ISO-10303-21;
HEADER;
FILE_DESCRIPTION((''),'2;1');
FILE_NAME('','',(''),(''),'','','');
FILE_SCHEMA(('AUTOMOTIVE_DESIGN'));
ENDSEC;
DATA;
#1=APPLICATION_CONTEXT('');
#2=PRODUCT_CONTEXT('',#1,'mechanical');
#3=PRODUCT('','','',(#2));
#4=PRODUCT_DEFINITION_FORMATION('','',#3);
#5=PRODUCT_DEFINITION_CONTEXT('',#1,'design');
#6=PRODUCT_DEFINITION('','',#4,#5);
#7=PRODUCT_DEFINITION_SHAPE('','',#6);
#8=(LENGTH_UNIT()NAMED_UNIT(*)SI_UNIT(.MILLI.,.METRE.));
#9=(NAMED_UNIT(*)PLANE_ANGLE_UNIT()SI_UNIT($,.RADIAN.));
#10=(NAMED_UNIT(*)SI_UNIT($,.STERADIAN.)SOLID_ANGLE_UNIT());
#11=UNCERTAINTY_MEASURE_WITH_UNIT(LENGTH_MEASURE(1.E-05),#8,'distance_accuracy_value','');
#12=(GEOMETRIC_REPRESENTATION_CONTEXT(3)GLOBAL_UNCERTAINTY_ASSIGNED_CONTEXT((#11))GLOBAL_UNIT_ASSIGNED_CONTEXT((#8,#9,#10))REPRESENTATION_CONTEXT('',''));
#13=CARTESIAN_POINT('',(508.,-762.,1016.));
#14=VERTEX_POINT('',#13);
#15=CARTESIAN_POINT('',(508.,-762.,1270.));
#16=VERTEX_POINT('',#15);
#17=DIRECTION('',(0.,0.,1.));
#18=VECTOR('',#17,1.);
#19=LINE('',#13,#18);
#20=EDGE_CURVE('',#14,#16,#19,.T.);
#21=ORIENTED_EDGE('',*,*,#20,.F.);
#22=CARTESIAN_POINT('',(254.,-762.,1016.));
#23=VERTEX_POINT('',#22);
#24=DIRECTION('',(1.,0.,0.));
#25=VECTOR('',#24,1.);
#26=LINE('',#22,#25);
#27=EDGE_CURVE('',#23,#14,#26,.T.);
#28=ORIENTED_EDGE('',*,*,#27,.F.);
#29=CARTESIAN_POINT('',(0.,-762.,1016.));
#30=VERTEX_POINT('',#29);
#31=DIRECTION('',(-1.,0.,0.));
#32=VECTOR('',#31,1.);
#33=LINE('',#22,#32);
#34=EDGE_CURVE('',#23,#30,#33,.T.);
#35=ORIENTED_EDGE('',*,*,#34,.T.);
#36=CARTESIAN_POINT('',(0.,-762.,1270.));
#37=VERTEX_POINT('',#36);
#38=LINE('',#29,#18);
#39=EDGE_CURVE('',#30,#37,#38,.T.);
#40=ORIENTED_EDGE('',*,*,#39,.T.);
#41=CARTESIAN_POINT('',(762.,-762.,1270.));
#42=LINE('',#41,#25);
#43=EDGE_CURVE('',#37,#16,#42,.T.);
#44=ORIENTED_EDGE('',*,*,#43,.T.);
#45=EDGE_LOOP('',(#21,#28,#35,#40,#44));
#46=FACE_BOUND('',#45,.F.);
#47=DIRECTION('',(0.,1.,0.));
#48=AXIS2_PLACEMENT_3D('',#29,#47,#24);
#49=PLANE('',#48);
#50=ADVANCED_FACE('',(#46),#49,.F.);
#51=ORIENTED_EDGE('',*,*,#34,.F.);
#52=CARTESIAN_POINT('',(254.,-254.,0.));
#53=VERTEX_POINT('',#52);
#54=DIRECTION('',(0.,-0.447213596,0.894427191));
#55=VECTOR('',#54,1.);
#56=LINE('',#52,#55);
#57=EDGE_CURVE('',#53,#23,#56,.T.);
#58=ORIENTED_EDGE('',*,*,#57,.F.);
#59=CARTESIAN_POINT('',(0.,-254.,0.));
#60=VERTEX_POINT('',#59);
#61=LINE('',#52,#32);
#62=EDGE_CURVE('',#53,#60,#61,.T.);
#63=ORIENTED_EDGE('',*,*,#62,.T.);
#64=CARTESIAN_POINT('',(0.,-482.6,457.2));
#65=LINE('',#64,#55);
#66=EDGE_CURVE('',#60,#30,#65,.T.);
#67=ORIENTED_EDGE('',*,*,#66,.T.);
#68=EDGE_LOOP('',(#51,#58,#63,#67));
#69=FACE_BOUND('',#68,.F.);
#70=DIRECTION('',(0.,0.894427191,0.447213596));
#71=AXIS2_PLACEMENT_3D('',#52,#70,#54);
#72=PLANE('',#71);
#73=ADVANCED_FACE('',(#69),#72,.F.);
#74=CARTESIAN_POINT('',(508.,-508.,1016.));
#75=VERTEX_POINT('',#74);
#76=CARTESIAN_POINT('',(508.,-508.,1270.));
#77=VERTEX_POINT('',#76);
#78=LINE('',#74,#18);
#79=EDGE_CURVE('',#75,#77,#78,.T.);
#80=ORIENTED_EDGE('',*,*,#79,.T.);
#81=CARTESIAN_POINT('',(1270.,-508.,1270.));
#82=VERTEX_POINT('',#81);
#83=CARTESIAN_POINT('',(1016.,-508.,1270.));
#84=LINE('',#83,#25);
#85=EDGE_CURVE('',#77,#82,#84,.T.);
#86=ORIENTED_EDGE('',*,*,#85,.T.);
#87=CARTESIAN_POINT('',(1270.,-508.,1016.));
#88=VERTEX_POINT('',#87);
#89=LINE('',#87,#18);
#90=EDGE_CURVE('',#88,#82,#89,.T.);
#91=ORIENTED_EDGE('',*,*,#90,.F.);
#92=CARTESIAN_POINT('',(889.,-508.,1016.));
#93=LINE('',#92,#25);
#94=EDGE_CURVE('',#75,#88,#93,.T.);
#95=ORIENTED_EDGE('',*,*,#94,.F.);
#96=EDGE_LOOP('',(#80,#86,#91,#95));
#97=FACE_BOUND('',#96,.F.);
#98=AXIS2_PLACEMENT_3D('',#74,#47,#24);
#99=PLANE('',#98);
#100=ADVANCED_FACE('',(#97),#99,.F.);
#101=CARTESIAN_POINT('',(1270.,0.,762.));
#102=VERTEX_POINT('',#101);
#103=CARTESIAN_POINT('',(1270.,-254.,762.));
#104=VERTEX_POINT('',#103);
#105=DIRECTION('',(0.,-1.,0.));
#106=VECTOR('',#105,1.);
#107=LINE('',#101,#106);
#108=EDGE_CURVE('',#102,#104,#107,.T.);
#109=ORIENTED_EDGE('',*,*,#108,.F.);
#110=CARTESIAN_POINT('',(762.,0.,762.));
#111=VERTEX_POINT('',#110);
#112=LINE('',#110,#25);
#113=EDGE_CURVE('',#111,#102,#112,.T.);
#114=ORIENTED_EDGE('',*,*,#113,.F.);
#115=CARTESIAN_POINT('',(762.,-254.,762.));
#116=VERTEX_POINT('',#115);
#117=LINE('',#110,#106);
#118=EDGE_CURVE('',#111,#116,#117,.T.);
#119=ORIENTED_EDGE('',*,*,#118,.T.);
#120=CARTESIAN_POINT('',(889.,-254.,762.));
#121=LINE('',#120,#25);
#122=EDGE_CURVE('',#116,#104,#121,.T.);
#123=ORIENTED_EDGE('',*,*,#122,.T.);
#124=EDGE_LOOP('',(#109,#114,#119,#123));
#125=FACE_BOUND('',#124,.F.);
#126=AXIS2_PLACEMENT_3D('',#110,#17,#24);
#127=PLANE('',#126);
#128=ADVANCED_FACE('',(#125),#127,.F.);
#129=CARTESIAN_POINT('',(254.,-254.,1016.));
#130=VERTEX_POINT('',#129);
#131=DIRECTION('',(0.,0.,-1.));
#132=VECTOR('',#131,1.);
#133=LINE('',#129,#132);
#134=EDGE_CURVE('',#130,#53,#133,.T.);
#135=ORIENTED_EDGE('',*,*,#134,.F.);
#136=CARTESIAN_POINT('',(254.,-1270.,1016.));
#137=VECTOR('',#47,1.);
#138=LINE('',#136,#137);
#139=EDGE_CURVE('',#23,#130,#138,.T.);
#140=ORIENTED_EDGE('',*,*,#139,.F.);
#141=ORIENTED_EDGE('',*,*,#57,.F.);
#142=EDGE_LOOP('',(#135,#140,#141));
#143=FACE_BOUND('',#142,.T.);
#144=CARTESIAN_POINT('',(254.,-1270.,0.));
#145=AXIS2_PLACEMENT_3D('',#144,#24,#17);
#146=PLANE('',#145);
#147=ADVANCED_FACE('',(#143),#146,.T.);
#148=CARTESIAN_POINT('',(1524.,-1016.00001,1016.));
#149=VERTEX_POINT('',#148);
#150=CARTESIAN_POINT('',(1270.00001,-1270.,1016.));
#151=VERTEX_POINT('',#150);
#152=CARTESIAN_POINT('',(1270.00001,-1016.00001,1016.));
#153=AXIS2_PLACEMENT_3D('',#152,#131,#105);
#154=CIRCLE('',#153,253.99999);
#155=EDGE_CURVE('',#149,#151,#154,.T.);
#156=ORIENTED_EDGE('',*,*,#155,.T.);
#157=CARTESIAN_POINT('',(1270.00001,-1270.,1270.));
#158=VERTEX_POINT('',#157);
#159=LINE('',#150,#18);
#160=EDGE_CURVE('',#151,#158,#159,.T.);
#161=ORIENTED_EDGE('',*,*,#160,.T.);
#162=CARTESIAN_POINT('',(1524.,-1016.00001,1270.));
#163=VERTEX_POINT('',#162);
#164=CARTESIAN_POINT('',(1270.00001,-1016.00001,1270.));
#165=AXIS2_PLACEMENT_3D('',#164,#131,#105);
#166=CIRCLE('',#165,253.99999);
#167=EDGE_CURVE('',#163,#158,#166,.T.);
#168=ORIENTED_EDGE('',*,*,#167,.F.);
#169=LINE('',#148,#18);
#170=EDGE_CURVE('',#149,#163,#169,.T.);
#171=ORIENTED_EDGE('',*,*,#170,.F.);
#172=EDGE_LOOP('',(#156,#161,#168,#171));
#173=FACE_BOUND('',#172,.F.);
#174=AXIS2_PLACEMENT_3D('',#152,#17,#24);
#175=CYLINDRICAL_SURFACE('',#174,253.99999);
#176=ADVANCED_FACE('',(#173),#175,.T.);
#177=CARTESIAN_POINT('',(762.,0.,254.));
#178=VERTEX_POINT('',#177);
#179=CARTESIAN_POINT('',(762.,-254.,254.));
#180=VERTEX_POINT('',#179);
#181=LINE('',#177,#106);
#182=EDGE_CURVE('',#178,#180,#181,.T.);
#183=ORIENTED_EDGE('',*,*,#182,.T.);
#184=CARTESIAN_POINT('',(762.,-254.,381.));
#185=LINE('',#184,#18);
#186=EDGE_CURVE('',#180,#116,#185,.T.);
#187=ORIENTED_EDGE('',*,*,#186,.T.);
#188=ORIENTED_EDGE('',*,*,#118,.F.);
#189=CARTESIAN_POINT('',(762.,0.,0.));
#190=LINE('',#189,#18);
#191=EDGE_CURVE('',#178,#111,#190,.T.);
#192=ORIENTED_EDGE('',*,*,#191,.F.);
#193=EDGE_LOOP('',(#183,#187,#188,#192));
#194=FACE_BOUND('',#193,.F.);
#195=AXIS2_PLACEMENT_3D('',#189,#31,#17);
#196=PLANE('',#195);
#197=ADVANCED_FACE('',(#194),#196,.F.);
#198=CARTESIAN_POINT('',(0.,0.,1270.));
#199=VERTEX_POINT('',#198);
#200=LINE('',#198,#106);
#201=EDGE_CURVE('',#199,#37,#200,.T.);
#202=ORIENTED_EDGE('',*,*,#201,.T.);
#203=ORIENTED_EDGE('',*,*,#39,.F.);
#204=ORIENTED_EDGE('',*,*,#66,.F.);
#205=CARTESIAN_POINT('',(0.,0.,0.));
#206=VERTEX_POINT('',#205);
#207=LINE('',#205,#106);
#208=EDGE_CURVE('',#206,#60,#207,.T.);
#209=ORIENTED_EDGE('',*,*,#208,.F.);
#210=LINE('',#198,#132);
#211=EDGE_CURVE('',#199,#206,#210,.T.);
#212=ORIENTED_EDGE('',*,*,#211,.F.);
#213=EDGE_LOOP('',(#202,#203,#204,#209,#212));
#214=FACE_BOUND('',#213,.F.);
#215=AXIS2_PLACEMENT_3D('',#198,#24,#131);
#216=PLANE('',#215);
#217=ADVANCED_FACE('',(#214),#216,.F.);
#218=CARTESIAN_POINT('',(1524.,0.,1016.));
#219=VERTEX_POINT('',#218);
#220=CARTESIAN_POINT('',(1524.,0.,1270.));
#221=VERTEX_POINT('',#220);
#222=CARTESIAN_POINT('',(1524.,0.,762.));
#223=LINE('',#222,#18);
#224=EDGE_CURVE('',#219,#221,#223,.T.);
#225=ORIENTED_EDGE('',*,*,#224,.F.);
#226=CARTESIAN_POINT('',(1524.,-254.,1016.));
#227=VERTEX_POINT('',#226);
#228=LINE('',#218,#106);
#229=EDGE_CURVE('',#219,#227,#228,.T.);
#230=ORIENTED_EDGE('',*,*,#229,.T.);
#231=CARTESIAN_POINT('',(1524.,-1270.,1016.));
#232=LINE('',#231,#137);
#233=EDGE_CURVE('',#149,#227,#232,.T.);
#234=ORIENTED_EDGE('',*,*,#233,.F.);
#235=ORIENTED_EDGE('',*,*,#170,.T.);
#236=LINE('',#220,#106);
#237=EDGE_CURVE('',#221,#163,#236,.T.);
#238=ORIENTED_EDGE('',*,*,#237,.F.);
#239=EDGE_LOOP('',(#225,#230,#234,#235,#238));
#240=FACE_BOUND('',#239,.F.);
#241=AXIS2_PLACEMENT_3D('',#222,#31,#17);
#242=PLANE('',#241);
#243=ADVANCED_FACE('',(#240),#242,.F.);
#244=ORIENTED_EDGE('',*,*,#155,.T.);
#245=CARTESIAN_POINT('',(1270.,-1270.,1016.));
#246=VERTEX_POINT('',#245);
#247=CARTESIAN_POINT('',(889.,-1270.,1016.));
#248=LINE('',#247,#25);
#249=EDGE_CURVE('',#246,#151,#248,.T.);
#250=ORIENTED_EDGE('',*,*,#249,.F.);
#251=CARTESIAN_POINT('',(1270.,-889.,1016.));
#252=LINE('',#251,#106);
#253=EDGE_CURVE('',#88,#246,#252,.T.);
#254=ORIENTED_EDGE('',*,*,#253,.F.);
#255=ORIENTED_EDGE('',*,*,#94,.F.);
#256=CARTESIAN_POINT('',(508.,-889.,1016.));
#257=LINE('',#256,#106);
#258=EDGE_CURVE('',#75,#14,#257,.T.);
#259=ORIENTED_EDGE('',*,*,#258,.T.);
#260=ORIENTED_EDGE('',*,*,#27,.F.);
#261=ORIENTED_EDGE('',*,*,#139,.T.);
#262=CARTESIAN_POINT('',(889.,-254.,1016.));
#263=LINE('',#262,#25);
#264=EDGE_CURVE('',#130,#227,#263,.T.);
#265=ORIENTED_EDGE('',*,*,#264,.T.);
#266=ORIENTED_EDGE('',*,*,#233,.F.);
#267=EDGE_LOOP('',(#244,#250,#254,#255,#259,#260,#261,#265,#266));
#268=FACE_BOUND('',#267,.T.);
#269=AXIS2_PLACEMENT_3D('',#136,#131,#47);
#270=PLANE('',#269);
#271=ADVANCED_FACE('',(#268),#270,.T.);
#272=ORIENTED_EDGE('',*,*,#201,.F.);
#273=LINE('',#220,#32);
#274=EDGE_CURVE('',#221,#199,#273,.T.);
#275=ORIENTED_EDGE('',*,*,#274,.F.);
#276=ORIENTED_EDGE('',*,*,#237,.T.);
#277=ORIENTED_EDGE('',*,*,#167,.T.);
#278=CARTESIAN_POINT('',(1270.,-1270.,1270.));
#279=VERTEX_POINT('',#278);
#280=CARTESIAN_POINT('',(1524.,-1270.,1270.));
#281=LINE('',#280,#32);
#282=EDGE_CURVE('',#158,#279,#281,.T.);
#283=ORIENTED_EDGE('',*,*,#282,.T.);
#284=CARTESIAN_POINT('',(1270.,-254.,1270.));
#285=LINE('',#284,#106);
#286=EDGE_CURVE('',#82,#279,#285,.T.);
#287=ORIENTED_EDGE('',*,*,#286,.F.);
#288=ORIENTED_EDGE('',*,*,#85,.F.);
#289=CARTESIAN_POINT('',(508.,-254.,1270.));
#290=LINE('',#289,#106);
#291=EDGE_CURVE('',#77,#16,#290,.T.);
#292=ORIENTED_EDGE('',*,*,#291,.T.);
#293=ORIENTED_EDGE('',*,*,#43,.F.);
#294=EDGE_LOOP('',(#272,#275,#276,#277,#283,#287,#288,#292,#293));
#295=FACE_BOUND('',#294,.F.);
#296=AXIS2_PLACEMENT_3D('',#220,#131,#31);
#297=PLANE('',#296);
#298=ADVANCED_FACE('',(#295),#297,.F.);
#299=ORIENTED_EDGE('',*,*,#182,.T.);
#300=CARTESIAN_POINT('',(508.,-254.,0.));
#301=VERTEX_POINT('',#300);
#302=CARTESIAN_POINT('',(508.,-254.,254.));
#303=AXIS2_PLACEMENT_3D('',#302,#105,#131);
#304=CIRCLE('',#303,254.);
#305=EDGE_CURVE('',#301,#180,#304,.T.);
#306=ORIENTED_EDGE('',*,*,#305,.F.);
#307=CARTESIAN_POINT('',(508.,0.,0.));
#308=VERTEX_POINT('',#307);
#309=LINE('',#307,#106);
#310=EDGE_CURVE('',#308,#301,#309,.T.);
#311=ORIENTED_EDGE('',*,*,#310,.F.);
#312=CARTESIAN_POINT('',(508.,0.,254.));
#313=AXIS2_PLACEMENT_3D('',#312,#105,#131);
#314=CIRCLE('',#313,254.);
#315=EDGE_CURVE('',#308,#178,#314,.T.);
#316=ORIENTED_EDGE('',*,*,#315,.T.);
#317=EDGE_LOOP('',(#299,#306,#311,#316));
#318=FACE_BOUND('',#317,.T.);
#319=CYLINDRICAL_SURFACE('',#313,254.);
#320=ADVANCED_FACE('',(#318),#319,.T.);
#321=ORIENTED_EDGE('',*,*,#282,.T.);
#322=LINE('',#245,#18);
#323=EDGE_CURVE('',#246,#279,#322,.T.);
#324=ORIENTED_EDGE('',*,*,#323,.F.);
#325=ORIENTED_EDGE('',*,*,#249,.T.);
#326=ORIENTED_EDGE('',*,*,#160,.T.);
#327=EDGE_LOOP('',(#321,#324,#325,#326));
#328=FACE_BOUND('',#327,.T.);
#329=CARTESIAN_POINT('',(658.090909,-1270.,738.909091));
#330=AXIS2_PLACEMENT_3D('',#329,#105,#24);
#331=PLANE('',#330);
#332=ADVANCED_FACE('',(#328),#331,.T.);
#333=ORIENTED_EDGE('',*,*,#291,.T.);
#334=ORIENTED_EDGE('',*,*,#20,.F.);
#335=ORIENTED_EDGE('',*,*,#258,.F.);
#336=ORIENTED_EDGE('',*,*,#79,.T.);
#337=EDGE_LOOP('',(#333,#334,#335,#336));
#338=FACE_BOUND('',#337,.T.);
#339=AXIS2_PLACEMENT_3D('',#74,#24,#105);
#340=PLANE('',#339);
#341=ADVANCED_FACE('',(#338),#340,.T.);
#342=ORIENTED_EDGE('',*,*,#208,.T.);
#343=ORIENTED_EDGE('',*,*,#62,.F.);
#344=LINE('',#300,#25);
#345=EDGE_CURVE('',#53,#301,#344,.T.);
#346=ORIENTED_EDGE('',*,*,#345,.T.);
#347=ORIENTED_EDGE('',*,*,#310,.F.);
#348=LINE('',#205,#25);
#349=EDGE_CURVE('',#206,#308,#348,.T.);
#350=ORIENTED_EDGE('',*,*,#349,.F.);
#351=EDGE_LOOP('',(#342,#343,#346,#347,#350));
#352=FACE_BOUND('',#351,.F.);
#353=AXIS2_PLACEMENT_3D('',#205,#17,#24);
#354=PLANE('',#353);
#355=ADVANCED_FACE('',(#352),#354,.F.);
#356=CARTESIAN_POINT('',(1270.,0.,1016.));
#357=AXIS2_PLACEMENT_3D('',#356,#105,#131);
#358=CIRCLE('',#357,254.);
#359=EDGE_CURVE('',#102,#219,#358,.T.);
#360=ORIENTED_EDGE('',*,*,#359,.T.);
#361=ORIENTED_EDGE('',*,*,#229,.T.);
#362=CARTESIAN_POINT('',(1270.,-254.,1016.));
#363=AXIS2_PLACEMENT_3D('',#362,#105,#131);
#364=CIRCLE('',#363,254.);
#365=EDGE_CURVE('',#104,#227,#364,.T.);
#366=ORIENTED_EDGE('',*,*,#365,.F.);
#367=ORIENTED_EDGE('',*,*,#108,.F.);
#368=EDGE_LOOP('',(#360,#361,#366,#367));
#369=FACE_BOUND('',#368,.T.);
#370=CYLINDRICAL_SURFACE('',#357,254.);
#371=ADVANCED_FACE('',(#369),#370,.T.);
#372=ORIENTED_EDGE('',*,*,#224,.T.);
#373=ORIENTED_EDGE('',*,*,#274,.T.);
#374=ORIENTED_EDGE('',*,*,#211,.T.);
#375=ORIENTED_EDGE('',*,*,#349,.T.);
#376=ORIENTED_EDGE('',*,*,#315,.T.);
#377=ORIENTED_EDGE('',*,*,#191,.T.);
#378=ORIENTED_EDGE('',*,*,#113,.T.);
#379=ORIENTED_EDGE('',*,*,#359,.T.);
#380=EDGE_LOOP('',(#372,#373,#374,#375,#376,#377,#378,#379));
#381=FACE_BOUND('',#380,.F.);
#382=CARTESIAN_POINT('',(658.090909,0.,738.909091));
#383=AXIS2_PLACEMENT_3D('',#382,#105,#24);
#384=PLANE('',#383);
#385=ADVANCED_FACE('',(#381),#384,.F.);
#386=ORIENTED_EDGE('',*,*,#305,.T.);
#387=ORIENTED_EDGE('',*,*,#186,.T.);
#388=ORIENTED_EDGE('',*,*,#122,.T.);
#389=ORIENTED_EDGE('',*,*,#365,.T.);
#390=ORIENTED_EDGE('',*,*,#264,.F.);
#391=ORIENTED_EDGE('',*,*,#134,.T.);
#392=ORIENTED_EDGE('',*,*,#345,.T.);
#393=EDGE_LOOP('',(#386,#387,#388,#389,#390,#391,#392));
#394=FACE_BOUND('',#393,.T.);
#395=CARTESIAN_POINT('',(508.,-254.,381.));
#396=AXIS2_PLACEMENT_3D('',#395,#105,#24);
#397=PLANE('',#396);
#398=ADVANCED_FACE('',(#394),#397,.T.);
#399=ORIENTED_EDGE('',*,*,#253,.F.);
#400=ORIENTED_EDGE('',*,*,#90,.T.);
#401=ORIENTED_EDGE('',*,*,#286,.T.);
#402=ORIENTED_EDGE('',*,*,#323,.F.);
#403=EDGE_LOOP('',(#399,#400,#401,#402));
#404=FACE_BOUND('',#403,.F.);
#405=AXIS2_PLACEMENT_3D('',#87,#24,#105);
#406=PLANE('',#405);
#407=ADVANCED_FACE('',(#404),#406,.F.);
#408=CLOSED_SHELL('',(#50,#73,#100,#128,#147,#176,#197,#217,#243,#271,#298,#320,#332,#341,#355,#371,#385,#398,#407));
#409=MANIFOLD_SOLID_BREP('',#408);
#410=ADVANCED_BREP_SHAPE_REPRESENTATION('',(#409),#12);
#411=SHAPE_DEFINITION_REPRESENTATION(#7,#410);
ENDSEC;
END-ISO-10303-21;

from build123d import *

# Parameters (mm, degrees)
F1_DEPTH  = 1270
F2_W      = 508
F2_H      = 762
F3_DEPTH  = 1016
F4_W      = 1270
F4_H      = 254
F5_DEPTH  = 1016
F6_W      = 762
F6_H      = 762
F7_DEPTH  = 254.001
F8_W      = 508
F8_H      = 1016
F9_DEPTH  = 254.001
F11_DEPTH = 254.001
F12_W     = 508
F12_H     = 508
F13_DEPTH = 254.001
F14_R     = 254
F15_R     = 253.99999


# Not quite as in the source:
# - a fillet or chamfer is up to 0.001 mm smaller than in the source, because OpenCascade refuses the exact size


with BuildPart() as f1:
    # F0 (on Front) → F1 (new body)
    with BuildSketch(Plane.XZ):
        Polygon((0, 1270), (0, 0), (762, 0), (762, 762), (1524, 762), (1524, 1270), align=None)
    extrude(amount=F1_DEPTH)

    # F2 (on face) → F3 (cut)
    with BuildSketch(Plane.XZ.offset(1270)):
        with Locations((508, 381)):
            Rectangle(F2_W, F2_H)
    extrude(amount=-F3_DEPTH, mode=Mode.SUBTRACT)

    # F4 (on face) → F5 (cut)
    with BuildSketch(Plane.XZ.offset(1270)):
        with Locations((889, 889)):
            Rectangle(F4_W, F4_H)
    extrude(amount=-F5_DEPTH, mode=Mode.SUBTRACT)

    # F6 (on face) → F7 (cut, through all)
    with BuildSketch(Plane(origin=(0, 0, 1016), x_dir=(1, 0, 0), z_dir=(0, 0, -1))):
        with Locations((889, 889)):
            Rectangle(F6_W, F6_H)
    extrude(amount=-F7_DEPTH, mode=Mode.SUBTRACT)

    # F8 (on face) → F9 (cut, through all)
    with BuildSketch(Plane.YZ.offset(254)):
        with Locations((-1016, 508)):
            Rectangle(F8_W, F8_H)
    extrude(amount=-F9_DEPTH, mode=Mode.SUBTRACT)

    # F10 (on face) → F11 (cut, through all)
    with BuildSketch(Plane.YZ.offset(254)):
        Polygon((-254, 0), (-762, 1016), (-762, 0), align=None)
    extrude(amount=-F11_DEPTH, mode=Mode.SUBTRACT)

    # F12 (on face) → F13 (cut, through all)
    with BuildSketch(Plane(origin=(0, 0, 1016), x_dir=(1, 0, 0), z_dir=(0, 0, -1))):
        with Locations((254, 1016)):
            Rectangle(F12_W, F12_H)
    extrude(amount=-F13_DEPTH, mode=Mode.SUBTRACT)

    # F14
    f14_edges = [f1.edges().sort_by_distance(p)[0] for p in [
        (762, -127, 0),
        (1524, -127, 762),
    ]]
    fillet(f14_edges, radius=F14_R)

    # F15 (radius 254 in the source; OpenCascade refuses exactly that, so slightly less here)
    f15_edges = [f1.edges().sort_by_distance(p)[0] for p in [
        (1524, -1270, 1143),
    ]]
    fillet(f15_edges, radius=F15_R)


solid = f1.part
